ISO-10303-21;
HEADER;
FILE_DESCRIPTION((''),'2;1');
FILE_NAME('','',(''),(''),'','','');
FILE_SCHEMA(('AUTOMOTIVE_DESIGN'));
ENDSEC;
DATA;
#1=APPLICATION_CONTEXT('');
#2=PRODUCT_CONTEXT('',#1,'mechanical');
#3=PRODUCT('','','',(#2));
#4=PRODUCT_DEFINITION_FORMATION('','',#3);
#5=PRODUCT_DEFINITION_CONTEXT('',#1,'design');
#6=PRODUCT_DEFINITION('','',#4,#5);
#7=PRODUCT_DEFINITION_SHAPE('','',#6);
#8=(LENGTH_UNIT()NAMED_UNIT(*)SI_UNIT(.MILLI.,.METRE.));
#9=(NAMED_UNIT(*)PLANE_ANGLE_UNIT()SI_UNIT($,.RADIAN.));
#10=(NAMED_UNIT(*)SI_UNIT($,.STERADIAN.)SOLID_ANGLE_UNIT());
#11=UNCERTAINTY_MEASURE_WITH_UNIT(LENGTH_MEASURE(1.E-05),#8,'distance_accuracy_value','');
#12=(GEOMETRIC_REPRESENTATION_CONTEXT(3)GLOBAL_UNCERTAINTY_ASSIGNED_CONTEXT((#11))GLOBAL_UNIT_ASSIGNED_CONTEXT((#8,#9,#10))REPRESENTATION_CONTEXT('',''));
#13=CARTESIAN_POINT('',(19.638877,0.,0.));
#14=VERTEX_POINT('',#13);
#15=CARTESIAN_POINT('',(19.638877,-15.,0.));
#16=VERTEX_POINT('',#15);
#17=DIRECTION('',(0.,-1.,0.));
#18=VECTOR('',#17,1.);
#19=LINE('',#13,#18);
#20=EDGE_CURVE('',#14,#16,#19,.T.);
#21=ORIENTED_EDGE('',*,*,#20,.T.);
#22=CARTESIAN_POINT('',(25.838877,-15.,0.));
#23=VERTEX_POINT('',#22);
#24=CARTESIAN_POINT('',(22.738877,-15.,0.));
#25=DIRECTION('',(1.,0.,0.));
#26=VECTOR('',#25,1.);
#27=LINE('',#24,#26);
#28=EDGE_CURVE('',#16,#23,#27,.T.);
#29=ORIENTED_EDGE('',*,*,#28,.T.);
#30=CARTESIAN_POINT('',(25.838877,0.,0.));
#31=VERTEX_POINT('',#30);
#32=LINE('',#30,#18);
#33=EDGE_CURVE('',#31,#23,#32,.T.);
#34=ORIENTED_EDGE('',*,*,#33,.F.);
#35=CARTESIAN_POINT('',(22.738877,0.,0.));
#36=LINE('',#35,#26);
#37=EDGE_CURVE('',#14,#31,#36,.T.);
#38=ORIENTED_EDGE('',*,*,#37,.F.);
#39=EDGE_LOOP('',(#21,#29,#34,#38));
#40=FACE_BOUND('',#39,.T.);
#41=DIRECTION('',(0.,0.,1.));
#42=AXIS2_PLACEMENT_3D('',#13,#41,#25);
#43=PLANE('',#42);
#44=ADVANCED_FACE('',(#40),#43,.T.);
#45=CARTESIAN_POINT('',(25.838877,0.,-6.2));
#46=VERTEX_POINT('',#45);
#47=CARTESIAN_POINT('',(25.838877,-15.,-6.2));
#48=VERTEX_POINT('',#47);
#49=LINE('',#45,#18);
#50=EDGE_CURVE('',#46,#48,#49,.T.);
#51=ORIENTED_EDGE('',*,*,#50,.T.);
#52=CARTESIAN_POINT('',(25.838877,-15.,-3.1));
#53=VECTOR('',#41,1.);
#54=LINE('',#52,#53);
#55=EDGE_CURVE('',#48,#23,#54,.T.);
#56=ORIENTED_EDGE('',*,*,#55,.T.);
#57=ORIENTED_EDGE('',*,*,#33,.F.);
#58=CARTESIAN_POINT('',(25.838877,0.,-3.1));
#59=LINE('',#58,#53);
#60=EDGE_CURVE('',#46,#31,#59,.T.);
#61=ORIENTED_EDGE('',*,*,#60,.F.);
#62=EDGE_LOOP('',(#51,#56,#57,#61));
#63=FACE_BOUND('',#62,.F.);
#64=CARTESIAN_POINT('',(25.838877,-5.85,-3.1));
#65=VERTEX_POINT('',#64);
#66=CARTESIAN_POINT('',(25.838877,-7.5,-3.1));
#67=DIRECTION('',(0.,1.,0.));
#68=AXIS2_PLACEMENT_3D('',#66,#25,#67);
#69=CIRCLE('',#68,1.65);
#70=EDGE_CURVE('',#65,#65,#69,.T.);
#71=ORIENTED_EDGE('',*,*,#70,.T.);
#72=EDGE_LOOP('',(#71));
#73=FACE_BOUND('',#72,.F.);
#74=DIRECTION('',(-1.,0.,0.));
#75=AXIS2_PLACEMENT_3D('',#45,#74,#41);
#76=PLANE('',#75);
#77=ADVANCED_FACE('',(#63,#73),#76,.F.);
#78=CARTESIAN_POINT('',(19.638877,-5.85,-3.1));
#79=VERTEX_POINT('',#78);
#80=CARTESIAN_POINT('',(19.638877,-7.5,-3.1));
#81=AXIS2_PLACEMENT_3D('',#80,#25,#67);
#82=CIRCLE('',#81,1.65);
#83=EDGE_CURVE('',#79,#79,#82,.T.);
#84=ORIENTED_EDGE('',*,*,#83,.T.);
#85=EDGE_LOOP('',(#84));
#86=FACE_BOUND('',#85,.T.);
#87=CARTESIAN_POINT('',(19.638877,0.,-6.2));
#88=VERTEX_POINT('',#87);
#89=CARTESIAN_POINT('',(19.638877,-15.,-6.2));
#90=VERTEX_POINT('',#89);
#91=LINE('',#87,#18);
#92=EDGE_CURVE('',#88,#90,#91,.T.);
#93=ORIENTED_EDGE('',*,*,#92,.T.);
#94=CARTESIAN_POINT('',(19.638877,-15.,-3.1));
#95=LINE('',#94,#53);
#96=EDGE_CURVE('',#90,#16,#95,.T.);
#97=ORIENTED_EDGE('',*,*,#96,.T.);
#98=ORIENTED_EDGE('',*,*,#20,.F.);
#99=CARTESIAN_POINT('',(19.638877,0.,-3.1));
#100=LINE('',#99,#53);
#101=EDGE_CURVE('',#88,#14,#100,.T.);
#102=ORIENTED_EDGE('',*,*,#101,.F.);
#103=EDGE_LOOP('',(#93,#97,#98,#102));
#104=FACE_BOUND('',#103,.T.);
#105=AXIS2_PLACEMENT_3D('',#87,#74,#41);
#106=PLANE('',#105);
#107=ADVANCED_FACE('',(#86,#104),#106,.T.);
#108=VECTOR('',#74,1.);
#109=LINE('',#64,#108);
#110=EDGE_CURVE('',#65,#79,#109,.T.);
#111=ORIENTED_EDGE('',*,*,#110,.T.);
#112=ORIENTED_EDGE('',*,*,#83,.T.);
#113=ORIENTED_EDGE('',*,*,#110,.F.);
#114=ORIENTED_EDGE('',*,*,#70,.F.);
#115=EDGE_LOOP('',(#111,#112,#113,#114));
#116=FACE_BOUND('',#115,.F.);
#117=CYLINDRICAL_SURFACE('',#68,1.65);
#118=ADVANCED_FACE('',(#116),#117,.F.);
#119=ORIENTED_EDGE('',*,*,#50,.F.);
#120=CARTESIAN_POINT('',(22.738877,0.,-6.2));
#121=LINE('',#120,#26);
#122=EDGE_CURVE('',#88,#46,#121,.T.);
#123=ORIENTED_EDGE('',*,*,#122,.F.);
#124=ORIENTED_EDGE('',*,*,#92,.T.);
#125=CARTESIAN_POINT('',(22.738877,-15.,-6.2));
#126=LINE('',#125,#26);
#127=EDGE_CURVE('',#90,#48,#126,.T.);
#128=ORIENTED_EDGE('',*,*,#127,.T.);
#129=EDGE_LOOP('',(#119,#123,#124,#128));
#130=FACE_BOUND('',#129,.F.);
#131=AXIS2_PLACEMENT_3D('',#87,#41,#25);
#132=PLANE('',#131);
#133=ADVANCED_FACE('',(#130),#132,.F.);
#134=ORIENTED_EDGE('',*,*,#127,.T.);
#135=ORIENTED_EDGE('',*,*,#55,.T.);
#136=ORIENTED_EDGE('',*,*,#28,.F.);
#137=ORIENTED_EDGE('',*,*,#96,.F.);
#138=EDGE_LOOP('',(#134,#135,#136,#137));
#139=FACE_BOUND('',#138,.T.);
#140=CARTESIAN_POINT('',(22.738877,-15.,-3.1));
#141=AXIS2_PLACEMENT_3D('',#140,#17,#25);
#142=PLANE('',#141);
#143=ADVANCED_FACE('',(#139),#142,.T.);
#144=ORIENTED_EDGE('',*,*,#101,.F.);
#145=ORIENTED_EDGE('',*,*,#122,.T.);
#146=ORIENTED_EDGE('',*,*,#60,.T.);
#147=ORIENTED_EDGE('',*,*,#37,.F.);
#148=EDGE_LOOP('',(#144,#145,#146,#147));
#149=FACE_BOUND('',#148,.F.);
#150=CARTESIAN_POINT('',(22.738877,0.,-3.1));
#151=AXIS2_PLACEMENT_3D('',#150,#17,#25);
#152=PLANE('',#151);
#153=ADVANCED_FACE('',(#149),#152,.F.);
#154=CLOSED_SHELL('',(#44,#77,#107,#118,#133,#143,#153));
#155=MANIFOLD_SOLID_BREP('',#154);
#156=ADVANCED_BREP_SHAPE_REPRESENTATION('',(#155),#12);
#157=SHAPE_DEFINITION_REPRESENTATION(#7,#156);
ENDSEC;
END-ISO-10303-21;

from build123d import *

# Parameters (mm, degrees)
F0_W     = 6.2
F0_H     = 6.2
F1_DEPTH = 15
F2_R     = 1.65
F3_DEPTH = 6.2


# Not quite as in the source:
# - a feature names something its author has since deleted; it is built from what else it names


with BuildPart() as f1:
    # F0 (on Front) → F1 (new body)
    with BuildSketch(Plane.XZ):
        with Locations((22.738877362, -3.1)):
            Rectangle(F0_W, F0_H)
    extrude(amount=F1_DEPTH)

    # F2 (on face) → F3 (cut, through all)
    with BuildSketch(Plane.YZ.offset(25.838877362)):
        with Locations((-7.5, -3.1)):
            Circle(F2_R)
    extrude(amount=-F3_DEPTH, mode=Mode.SUBTRACT)


solid = f1.part
